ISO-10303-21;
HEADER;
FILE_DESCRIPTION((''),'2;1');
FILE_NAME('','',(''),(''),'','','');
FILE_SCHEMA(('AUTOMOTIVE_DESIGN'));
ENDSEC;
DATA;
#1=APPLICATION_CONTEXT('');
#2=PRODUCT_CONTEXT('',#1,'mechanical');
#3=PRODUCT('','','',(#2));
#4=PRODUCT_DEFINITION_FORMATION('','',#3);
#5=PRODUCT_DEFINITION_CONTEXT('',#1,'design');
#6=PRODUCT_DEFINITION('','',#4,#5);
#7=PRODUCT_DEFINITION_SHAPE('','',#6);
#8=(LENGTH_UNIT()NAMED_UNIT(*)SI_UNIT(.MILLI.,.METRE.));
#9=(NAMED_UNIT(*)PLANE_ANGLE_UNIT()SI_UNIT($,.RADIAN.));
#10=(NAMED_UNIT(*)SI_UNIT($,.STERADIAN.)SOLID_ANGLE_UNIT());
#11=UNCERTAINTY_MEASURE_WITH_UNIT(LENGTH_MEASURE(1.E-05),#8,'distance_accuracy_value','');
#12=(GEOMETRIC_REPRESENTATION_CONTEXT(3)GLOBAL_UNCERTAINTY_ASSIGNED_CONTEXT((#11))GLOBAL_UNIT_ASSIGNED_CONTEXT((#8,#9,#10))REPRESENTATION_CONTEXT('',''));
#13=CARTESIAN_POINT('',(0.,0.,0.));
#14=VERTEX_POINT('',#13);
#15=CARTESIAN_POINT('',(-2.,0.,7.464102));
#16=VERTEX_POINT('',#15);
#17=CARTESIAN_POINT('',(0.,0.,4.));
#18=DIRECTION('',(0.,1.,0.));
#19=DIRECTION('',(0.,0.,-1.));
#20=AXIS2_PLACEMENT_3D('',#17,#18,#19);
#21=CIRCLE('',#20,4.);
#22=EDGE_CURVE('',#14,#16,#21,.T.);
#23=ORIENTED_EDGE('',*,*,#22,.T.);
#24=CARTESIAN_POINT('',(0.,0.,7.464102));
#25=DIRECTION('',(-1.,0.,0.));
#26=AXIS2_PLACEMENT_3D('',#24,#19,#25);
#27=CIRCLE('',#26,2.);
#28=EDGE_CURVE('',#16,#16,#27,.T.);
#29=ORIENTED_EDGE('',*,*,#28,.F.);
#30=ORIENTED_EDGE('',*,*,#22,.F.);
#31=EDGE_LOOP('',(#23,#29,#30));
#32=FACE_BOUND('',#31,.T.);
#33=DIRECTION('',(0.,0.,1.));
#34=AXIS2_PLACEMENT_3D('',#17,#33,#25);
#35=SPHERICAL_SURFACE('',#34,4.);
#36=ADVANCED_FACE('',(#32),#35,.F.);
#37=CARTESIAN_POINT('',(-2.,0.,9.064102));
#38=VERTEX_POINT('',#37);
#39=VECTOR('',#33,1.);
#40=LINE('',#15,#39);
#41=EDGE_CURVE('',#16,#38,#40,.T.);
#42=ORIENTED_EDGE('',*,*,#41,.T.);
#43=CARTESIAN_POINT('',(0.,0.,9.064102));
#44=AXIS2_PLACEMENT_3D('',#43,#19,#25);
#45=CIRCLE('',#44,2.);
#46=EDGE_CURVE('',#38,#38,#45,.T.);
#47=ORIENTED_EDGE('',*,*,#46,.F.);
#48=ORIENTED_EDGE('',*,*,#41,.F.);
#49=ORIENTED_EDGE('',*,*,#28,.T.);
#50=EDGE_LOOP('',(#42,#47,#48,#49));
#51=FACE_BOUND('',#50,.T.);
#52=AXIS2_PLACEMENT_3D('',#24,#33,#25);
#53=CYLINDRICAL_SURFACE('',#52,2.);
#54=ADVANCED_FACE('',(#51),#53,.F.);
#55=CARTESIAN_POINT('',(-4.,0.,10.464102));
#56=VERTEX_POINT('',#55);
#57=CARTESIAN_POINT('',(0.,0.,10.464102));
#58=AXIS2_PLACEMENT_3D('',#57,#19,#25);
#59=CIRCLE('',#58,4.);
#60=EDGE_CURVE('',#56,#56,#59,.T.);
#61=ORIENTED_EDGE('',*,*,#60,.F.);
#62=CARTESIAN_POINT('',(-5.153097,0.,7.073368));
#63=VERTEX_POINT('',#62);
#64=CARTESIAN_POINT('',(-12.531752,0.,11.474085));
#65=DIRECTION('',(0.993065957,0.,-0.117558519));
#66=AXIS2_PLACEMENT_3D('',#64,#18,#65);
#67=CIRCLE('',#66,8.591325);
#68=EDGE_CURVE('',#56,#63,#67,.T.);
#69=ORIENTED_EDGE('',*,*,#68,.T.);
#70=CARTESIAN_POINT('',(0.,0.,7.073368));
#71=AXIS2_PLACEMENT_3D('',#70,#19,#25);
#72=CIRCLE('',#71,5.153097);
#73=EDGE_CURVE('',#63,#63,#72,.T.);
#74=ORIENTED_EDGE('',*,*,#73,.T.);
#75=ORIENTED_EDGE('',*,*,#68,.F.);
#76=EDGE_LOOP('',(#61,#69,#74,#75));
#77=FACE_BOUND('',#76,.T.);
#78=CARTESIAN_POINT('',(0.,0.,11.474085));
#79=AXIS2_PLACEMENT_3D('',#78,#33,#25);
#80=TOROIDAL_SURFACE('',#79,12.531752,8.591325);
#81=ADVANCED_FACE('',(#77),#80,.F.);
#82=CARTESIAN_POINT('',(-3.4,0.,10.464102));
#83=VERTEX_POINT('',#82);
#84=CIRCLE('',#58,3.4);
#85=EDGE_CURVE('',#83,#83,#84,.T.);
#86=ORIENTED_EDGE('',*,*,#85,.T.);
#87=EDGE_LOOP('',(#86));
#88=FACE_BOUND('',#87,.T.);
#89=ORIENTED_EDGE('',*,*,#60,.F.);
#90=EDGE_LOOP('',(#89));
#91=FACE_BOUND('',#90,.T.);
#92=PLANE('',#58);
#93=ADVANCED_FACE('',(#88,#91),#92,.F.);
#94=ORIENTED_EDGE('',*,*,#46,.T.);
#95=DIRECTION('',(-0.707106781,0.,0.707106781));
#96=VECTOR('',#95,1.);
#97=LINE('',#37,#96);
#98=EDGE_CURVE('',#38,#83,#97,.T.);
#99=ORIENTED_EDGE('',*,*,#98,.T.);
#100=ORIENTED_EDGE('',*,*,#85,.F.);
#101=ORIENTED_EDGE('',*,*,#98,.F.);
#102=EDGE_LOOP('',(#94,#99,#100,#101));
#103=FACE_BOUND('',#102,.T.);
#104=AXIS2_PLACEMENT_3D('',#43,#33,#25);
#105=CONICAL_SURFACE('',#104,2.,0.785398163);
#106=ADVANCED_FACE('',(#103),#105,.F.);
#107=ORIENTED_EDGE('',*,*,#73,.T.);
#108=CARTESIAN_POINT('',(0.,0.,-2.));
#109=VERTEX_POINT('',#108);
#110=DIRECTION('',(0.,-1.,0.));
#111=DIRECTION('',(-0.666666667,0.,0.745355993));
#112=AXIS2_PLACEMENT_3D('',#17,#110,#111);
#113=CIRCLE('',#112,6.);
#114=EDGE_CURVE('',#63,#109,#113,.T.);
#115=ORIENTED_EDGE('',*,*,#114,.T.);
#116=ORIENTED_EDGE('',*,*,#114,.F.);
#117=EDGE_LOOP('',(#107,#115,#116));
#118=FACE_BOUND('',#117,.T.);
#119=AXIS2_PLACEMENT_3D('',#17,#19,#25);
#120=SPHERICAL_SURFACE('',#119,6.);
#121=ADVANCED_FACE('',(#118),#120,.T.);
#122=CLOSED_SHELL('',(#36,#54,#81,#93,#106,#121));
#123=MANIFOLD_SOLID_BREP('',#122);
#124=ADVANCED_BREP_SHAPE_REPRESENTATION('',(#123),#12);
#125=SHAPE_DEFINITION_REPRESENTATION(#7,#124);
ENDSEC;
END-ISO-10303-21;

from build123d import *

# Parameters (mm, degrees)
F2_SIZE = 1.4


# Not quite as in the source:
# - a fillet or chamfer that OpenCascade refuses, or shapes differently, is made with other operations: its cross-section is extruded or revolved along the edge and cut away or added


with BuildPart() as f1:
    # F0 (on Front) → F1 (revolve)
    with BuildSketch(Plane.XZ):
        with BuildLine():
            ThreePointArc((0, 0), (-3.8637033052, 2.9647238196), (-2, 7.4641016151))
            Line((-2, 7.4641016151), (-2, 10.4641016151))
            Line((-2, 10.4641016151), (-4, 10.4641016151))
            Line((-4, 10.4641016151), (-4, 8.472135955))
            ThreePointArc((-4, 8.472135955), (-5.6050341538, 1.8590674614), (0, -2))
            Line((0, -2), (0, 0))
        make_face()
    revolve(axis=Axis((0, 0, -1), (0, 0, -1)))

    # F2
    f2_edges = [f1.edges().sort_by_distance(p)[0] for p in [
        (2, 0, 10.464102),
    ]]
    chamfer(f2_edges, length=F2_SIZE)

    # F3: fillet of radius 8.5913249715 on 1 edges, made by hand

    # F3_s1 → F3_t2 (revolve)
    with BuildSketch(Plane.XZ):
        with BuildLine():
            ThreePointArc((-4, 10.4641016151), (-4.397901087, 8.7079815946), (-5.1530970812, 7.0733679363))
            ThreePointArc((-5.1530970812, 7.0733679363), (-4.6296797445, 7.8165515145), (-4, 8.472135955))
            Line((-4, 8.472135955), (-4, 10.4641016151))
        make_face()
    revolve(axis=Axis((0, 0, 8.472135955), (0, 0, -1)))


solid = f1.part
